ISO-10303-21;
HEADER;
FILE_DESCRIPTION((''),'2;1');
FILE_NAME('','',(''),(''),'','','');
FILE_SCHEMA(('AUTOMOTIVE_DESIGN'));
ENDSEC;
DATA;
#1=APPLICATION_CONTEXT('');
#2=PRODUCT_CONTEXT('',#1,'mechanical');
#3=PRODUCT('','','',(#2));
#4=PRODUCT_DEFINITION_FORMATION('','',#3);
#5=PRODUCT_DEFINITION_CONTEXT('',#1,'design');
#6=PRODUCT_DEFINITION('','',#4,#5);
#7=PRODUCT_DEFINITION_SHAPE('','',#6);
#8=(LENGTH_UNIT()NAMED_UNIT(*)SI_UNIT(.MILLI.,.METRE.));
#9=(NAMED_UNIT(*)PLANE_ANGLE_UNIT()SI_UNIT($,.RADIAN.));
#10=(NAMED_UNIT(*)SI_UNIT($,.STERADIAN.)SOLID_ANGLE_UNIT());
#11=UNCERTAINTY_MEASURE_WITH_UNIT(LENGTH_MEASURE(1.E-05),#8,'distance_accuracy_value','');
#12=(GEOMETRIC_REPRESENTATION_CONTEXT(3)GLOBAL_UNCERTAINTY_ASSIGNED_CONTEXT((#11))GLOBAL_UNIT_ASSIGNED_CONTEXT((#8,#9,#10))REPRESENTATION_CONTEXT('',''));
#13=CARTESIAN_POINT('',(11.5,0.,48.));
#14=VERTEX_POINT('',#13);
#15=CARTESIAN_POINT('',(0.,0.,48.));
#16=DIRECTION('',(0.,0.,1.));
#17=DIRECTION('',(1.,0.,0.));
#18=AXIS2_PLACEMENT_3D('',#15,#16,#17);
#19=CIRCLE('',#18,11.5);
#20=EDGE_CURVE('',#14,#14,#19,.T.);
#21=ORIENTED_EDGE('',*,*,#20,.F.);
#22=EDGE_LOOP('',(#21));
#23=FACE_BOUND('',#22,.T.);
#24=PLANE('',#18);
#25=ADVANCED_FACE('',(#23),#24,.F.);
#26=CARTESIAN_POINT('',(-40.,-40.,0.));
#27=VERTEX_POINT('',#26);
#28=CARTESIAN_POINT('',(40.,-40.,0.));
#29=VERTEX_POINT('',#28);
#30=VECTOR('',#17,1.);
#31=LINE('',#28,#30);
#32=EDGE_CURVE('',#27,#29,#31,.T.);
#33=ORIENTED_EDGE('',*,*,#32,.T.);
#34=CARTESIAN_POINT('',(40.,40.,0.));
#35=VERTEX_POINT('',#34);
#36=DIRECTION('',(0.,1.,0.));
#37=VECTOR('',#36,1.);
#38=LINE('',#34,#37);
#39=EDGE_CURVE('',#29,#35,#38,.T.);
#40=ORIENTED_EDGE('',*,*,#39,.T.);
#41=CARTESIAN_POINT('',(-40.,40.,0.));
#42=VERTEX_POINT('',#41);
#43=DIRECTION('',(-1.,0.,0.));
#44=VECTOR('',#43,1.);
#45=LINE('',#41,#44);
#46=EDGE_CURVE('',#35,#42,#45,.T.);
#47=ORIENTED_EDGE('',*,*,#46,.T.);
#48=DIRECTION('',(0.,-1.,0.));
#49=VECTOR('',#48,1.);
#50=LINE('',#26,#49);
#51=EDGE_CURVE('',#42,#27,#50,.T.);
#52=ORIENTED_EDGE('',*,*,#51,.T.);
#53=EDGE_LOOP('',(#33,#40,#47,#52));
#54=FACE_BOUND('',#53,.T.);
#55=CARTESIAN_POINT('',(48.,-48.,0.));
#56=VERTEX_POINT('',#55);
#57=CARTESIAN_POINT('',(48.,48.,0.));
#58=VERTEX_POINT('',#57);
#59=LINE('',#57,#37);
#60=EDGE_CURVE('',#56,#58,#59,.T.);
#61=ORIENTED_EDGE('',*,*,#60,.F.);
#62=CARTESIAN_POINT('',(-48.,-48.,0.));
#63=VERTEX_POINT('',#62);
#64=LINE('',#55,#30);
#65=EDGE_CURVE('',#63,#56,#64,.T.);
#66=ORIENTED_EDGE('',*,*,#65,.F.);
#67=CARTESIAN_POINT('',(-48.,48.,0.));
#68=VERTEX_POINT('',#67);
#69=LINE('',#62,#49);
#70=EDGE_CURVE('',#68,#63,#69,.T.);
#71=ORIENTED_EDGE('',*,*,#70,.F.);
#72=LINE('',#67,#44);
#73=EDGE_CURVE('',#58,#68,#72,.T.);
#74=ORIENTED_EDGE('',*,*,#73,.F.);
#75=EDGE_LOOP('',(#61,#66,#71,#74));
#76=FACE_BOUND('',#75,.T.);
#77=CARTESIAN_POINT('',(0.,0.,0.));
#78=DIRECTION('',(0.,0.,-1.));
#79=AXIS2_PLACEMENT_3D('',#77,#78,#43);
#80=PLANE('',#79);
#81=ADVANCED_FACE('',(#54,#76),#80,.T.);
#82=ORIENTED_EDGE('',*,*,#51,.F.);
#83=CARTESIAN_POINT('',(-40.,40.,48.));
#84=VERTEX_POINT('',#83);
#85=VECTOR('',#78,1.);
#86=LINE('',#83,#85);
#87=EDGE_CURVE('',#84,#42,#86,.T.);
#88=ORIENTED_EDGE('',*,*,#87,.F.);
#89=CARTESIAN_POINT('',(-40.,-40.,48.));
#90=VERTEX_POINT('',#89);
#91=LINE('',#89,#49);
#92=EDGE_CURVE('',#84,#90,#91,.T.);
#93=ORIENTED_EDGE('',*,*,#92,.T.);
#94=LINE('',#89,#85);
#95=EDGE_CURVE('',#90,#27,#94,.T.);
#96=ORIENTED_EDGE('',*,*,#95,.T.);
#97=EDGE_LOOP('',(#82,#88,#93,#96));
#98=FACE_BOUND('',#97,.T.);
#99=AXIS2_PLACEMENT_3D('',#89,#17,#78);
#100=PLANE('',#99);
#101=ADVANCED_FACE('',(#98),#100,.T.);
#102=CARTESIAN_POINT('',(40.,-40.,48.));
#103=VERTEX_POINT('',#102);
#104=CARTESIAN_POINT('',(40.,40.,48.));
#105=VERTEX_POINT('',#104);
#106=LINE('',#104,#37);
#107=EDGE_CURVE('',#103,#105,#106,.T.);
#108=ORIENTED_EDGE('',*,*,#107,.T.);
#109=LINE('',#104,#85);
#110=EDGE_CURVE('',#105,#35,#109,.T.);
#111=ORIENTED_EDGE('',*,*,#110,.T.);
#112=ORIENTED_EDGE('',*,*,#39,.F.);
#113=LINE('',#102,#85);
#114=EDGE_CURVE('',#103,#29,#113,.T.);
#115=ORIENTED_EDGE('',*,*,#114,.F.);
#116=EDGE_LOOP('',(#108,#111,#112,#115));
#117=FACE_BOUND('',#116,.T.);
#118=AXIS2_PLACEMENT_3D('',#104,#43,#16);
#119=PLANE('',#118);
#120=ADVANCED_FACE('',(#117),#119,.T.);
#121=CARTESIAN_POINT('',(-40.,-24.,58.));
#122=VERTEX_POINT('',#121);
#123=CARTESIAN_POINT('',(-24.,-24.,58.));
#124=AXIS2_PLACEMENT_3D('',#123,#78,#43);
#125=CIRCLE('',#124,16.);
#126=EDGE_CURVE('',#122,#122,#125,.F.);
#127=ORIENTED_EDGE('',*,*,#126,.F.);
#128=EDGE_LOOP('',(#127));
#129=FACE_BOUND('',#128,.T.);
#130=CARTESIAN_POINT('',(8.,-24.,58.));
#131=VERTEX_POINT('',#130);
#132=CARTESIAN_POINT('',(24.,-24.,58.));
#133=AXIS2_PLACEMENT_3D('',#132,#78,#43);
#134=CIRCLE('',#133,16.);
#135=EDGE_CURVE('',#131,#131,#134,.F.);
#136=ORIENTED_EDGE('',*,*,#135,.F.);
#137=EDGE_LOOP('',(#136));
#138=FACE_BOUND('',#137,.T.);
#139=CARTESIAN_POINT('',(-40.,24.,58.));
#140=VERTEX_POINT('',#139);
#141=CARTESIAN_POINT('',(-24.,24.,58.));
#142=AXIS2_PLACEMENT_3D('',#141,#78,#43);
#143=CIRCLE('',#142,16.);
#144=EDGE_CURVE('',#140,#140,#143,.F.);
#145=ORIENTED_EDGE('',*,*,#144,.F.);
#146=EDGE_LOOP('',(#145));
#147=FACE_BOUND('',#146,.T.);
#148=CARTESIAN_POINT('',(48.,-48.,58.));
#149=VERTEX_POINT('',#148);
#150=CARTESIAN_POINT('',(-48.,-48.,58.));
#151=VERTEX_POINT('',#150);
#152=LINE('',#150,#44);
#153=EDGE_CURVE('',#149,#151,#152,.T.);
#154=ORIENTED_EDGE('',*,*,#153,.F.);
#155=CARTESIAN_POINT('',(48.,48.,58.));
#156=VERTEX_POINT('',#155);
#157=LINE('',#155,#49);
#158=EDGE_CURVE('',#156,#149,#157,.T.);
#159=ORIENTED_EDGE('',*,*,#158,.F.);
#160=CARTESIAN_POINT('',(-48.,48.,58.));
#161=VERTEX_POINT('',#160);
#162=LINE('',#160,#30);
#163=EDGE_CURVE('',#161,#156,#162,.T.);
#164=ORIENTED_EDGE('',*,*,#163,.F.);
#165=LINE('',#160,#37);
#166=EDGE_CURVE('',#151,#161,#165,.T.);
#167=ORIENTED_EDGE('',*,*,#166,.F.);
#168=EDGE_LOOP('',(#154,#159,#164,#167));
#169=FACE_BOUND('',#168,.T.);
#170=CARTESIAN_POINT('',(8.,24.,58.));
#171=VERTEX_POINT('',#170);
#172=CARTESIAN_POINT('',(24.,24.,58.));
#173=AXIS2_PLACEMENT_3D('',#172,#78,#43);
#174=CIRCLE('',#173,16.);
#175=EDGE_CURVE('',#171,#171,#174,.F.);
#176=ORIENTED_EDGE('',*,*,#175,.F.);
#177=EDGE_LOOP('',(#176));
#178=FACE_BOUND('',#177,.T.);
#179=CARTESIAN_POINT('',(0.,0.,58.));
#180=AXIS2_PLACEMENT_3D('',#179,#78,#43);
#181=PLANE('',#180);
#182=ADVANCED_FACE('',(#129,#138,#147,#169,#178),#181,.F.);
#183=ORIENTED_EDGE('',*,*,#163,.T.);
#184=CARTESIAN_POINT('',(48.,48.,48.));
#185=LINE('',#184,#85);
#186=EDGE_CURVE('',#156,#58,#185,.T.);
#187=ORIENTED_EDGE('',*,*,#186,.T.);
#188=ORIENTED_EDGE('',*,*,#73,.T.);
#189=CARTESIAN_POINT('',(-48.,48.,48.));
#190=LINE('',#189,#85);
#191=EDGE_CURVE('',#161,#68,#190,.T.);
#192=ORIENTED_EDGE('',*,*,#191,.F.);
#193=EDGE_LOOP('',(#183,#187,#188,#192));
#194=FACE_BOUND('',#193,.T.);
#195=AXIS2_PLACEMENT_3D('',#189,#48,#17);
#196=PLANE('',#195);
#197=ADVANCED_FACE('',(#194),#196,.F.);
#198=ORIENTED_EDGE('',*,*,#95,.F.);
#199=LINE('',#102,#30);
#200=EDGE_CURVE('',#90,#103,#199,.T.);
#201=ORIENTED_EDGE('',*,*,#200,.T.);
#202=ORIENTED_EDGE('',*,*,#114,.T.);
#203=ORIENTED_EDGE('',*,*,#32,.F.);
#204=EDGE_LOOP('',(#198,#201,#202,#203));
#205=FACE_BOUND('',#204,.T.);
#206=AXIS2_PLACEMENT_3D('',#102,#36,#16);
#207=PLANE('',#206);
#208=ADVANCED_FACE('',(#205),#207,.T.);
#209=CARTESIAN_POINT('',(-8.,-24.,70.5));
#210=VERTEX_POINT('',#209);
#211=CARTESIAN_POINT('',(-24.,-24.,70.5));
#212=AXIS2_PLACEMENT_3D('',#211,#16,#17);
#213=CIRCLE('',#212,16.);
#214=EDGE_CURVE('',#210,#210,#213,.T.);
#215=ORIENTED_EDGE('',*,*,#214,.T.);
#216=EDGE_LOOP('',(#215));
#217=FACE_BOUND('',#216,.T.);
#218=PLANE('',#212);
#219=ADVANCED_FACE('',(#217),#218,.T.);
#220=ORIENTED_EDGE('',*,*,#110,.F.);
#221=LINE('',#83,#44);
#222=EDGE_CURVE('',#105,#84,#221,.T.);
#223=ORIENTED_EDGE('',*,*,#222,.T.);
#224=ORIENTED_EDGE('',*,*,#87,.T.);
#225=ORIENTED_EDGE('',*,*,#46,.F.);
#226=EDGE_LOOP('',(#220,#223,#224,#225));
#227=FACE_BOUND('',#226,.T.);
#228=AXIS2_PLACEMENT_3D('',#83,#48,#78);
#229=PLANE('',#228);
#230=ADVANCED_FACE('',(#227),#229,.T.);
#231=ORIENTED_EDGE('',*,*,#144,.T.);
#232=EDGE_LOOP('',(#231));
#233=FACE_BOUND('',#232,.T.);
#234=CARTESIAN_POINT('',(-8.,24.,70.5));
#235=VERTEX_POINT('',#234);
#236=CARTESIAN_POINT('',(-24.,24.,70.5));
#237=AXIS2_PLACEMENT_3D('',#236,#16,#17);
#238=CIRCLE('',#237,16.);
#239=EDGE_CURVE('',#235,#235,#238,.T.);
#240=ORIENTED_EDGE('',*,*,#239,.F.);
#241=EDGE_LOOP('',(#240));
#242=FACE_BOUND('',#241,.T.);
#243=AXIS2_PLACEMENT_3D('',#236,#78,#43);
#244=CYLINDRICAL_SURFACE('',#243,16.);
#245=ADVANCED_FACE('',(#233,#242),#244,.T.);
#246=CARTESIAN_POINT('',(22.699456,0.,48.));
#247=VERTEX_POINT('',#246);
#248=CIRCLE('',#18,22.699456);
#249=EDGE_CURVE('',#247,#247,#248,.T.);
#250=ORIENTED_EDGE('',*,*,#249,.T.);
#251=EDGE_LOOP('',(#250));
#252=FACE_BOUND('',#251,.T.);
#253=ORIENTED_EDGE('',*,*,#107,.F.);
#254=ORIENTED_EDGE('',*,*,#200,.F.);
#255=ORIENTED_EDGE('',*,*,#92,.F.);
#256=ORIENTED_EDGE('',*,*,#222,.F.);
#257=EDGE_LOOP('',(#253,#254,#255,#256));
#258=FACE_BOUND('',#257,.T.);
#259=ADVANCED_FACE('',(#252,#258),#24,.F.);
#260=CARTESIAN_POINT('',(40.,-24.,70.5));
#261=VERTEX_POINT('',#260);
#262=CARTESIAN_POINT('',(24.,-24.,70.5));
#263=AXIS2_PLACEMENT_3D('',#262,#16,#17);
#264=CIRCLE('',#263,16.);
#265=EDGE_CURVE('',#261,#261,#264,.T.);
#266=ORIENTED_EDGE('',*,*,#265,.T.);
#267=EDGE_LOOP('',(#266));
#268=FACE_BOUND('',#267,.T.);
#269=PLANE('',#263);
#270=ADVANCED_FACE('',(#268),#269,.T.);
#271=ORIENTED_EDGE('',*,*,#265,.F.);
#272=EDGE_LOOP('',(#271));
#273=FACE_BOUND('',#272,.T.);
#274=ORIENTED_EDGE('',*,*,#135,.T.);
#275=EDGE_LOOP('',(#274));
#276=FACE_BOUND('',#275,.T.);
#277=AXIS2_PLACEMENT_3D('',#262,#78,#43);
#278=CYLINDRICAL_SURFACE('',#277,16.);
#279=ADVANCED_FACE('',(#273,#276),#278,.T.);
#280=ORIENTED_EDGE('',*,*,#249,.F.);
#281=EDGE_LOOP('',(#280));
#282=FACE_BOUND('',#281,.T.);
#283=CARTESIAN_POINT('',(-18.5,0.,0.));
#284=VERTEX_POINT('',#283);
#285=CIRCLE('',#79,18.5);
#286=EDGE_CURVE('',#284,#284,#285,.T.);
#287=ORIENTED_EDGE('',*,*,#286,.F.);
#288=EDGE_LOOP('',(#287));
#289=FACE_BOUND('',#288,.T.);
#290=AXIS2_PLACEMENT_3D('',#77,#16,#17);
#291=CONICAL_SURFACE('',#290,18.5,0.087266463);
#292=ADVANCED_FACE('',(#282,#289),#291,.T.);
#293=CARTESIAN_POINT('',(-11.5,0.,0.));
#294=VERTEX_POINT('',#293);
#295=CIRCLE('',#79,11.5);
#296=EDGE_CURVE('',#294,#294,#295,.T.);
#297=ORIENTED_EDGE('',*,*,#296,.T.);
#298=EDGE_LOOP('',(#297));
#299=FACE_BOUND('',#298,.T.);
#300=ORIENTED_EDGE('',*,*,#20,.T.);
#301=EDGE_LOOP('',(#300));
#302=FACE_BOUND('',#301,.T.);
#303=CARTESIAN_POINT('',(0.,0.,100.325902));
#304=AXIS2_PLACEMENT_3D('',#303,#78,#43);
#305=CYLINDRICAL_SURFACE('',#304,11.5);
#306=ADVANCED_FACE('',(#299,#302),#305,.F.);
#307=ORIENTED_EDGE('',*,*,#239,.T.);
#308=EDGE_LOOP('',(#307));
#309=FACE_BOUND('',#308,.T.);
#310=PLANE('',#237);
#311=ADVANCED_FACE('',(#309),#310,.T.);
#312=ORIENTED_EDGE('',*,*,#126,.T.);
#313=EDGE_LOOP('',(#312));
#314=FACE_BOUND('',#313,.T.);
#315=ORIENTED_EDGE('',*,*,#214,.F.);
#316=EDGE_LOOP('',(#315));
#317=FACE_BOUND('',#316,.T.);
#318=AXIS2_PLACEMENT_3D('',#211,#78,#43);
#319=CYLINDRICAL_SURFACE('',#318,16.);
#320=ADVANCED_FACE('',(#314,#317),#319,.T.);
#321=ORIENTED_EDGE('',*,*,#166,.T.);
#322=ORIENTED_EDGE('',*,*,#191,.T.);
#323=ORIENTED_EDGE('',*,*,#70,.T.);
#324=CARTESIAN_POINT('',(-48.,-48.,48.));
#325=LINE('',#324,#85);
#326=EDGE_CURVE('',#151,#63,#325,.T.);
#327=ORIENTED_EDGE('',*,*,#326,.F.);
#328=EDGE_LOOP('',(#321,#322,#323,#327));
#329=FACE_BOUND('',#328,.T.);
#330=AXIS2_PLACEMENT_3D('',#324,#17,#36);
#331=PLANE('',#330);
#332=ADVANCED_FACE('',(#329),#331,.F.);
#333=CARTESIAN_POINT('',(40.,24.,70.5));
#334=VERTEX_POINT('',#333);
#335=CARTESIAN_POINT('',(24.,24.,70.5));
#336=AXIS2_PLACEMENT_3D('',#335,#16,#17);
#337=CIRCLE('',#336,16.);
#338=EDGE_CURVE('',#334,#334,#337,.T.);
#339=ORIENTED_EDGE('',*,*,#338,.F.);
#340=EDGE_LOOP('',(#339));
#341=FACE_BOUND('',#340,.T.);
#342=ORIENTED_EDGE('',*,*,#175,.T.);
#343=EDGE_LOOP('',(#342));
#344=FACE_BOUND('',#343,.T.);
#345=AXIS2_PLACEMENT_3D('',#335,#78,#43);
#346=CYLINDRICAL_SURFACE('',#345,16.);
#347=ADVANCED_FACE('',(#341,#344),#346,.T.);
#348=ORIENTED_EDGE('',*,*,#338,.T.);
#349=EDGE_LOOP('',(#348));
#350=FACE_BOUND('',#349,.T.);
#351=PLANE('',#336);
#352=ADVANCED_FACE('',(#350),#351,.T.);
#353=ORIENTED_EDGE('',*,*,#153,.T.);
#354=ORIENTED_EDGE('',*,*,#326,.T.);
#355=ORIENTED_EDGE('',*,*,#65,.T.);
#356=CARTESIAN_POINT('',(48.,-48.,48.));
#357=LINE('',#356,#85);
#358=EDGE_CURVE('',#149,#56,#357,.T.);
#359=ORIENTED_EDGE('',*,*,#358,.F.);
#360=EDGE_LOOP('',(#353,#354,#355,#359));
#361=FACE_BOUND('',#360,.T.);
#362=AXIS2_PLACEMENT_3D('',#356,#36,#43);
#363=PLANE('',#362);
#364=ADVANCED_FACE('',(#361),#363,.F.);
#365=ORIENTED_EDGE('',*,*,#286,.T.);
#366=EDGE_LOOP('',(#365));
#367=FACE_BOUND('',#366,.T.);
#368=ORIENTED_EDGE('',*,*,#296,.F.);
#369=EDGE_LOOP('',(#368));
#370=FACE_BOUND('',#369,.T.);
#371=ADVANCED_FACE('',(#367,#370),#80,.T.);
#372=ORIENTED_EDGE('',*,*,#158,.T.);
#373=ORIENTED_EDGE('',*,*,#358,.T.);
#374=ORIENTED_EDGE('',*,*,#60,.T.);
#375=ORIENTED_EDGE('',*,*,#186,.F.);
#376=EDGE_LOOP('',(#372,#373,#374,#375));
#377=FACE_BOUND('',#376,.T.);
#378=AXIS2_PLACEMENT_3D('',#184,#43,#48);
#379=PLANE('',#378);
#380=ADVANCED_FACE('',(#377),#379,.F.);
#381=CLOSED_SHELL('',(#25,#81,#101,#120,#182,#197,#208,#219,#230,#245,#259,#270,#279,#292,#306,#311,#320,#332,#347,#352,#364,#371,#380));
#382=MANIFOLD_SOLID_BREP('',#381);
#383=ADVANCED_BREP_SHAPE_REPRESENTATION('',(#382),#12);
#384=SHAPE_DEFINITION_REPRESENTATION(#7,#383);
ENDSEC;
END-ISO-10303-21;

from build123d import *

# Parameters (mm, degrees)
ESQUISSE1_W        = 96
ESQUISSE1_H        = 96
ESQUISSE1_W_2      = 80
ESQUISSE1_H_2      = 80
BOSS_EXTRU_1_DEPTH = 48
ESQUISSE2_W        = 96
ESQUISSE2_H        = 96
BOSS_EXTRU_3_DEPTH = 10
ESQUISSE3_R        = 16
BOSS_EXTRU_4_DEPTH = 12.5
ESQUISSE4_R        = 18.5
ESQUISSE4_R_2      = 11.5
BOSS_EXTRU_5_DEPTH = 48
CHANFREIN1_SIZE2   = 48
CHANFREIN1_SIZE    = 4.199455849


with BuildPart() as part:
    # Esquisse1 → Boss.-Extru.1 (new body)
    with BuildSketch(Plane.XY):
        Rectangle(ESQUISSE1_W, ESQUISSE1_H)
        Rectangle(ESQUISSE1_W_2, ESQUISSE1_H_2, mode=Mode.SUBTRACT)
    extrude(amount=BOSS_EXTRU_1_DEPTH)

    # Esquisse2 → Boss.-Extru.3 (add)
    with BuildSketch(Plane.XY.offset(48)):
        Rectangle(ESQUISSE2_W, ESQUISSE2_H)
    extrude(amount=BOSS_EXTRU_3_DEPTH)

    # Esquisse3 → Boss.-Extru.4 (add)
    with BuildSketch(Plane.XY.offset(58)):
        with Locations(Location((-24, 24, 0), (0, 0, 180))):
            Circle(ESQUISSE3_R)
        with Locations(Location((24, 24, 0), (0, 0, 180))):
            Circle(ESQUISSE3_R)
        with Locations(Location((24, -24, 0), (0, 0, 180))):
            Circle(ESQUISSE3_R)
        with Locations(Location((-24, -24, 0), (0, 0, 180))):
            Circle(ESQUISSE3_R)
    extrude(amount=BOSS_EXTRU_4_DEPTH)

    # Esquisse4 → Boss.-Extru.5 (add)
    with BuildSketch(Plane(origin=(0, 0, 0), x_dir=(-1, 0, 0), z_dir=(0, 0, -1))):
        Circle(ESQUISSE4_R)
        Circle(ESQUISSE4_R_2, mode=Mode.SUBTRACT)
    extrude(amount=-BOSS_EXTRU_5_DEPTH)

    # Chanfrein1
    chanfrein1_edges = [part.edges().sort_by_distance(p)[0] for p in [
        (18.5, 0, 48),
    ]]
    chanfrein1_side = [part.faces().sort_by_distance(p)[0] for p in [
        (18.583989117, 0, 48),
    ]]
    chamfer(chanfrein1_edges, length=CHANFREIN1_SIZE - 0.0001, length2=CHANFREIN1_SIZE2 - 0.0001, reference=chanfrein1_side[0])  # a hair under: the kernel refuses the full size


solid = part.part
